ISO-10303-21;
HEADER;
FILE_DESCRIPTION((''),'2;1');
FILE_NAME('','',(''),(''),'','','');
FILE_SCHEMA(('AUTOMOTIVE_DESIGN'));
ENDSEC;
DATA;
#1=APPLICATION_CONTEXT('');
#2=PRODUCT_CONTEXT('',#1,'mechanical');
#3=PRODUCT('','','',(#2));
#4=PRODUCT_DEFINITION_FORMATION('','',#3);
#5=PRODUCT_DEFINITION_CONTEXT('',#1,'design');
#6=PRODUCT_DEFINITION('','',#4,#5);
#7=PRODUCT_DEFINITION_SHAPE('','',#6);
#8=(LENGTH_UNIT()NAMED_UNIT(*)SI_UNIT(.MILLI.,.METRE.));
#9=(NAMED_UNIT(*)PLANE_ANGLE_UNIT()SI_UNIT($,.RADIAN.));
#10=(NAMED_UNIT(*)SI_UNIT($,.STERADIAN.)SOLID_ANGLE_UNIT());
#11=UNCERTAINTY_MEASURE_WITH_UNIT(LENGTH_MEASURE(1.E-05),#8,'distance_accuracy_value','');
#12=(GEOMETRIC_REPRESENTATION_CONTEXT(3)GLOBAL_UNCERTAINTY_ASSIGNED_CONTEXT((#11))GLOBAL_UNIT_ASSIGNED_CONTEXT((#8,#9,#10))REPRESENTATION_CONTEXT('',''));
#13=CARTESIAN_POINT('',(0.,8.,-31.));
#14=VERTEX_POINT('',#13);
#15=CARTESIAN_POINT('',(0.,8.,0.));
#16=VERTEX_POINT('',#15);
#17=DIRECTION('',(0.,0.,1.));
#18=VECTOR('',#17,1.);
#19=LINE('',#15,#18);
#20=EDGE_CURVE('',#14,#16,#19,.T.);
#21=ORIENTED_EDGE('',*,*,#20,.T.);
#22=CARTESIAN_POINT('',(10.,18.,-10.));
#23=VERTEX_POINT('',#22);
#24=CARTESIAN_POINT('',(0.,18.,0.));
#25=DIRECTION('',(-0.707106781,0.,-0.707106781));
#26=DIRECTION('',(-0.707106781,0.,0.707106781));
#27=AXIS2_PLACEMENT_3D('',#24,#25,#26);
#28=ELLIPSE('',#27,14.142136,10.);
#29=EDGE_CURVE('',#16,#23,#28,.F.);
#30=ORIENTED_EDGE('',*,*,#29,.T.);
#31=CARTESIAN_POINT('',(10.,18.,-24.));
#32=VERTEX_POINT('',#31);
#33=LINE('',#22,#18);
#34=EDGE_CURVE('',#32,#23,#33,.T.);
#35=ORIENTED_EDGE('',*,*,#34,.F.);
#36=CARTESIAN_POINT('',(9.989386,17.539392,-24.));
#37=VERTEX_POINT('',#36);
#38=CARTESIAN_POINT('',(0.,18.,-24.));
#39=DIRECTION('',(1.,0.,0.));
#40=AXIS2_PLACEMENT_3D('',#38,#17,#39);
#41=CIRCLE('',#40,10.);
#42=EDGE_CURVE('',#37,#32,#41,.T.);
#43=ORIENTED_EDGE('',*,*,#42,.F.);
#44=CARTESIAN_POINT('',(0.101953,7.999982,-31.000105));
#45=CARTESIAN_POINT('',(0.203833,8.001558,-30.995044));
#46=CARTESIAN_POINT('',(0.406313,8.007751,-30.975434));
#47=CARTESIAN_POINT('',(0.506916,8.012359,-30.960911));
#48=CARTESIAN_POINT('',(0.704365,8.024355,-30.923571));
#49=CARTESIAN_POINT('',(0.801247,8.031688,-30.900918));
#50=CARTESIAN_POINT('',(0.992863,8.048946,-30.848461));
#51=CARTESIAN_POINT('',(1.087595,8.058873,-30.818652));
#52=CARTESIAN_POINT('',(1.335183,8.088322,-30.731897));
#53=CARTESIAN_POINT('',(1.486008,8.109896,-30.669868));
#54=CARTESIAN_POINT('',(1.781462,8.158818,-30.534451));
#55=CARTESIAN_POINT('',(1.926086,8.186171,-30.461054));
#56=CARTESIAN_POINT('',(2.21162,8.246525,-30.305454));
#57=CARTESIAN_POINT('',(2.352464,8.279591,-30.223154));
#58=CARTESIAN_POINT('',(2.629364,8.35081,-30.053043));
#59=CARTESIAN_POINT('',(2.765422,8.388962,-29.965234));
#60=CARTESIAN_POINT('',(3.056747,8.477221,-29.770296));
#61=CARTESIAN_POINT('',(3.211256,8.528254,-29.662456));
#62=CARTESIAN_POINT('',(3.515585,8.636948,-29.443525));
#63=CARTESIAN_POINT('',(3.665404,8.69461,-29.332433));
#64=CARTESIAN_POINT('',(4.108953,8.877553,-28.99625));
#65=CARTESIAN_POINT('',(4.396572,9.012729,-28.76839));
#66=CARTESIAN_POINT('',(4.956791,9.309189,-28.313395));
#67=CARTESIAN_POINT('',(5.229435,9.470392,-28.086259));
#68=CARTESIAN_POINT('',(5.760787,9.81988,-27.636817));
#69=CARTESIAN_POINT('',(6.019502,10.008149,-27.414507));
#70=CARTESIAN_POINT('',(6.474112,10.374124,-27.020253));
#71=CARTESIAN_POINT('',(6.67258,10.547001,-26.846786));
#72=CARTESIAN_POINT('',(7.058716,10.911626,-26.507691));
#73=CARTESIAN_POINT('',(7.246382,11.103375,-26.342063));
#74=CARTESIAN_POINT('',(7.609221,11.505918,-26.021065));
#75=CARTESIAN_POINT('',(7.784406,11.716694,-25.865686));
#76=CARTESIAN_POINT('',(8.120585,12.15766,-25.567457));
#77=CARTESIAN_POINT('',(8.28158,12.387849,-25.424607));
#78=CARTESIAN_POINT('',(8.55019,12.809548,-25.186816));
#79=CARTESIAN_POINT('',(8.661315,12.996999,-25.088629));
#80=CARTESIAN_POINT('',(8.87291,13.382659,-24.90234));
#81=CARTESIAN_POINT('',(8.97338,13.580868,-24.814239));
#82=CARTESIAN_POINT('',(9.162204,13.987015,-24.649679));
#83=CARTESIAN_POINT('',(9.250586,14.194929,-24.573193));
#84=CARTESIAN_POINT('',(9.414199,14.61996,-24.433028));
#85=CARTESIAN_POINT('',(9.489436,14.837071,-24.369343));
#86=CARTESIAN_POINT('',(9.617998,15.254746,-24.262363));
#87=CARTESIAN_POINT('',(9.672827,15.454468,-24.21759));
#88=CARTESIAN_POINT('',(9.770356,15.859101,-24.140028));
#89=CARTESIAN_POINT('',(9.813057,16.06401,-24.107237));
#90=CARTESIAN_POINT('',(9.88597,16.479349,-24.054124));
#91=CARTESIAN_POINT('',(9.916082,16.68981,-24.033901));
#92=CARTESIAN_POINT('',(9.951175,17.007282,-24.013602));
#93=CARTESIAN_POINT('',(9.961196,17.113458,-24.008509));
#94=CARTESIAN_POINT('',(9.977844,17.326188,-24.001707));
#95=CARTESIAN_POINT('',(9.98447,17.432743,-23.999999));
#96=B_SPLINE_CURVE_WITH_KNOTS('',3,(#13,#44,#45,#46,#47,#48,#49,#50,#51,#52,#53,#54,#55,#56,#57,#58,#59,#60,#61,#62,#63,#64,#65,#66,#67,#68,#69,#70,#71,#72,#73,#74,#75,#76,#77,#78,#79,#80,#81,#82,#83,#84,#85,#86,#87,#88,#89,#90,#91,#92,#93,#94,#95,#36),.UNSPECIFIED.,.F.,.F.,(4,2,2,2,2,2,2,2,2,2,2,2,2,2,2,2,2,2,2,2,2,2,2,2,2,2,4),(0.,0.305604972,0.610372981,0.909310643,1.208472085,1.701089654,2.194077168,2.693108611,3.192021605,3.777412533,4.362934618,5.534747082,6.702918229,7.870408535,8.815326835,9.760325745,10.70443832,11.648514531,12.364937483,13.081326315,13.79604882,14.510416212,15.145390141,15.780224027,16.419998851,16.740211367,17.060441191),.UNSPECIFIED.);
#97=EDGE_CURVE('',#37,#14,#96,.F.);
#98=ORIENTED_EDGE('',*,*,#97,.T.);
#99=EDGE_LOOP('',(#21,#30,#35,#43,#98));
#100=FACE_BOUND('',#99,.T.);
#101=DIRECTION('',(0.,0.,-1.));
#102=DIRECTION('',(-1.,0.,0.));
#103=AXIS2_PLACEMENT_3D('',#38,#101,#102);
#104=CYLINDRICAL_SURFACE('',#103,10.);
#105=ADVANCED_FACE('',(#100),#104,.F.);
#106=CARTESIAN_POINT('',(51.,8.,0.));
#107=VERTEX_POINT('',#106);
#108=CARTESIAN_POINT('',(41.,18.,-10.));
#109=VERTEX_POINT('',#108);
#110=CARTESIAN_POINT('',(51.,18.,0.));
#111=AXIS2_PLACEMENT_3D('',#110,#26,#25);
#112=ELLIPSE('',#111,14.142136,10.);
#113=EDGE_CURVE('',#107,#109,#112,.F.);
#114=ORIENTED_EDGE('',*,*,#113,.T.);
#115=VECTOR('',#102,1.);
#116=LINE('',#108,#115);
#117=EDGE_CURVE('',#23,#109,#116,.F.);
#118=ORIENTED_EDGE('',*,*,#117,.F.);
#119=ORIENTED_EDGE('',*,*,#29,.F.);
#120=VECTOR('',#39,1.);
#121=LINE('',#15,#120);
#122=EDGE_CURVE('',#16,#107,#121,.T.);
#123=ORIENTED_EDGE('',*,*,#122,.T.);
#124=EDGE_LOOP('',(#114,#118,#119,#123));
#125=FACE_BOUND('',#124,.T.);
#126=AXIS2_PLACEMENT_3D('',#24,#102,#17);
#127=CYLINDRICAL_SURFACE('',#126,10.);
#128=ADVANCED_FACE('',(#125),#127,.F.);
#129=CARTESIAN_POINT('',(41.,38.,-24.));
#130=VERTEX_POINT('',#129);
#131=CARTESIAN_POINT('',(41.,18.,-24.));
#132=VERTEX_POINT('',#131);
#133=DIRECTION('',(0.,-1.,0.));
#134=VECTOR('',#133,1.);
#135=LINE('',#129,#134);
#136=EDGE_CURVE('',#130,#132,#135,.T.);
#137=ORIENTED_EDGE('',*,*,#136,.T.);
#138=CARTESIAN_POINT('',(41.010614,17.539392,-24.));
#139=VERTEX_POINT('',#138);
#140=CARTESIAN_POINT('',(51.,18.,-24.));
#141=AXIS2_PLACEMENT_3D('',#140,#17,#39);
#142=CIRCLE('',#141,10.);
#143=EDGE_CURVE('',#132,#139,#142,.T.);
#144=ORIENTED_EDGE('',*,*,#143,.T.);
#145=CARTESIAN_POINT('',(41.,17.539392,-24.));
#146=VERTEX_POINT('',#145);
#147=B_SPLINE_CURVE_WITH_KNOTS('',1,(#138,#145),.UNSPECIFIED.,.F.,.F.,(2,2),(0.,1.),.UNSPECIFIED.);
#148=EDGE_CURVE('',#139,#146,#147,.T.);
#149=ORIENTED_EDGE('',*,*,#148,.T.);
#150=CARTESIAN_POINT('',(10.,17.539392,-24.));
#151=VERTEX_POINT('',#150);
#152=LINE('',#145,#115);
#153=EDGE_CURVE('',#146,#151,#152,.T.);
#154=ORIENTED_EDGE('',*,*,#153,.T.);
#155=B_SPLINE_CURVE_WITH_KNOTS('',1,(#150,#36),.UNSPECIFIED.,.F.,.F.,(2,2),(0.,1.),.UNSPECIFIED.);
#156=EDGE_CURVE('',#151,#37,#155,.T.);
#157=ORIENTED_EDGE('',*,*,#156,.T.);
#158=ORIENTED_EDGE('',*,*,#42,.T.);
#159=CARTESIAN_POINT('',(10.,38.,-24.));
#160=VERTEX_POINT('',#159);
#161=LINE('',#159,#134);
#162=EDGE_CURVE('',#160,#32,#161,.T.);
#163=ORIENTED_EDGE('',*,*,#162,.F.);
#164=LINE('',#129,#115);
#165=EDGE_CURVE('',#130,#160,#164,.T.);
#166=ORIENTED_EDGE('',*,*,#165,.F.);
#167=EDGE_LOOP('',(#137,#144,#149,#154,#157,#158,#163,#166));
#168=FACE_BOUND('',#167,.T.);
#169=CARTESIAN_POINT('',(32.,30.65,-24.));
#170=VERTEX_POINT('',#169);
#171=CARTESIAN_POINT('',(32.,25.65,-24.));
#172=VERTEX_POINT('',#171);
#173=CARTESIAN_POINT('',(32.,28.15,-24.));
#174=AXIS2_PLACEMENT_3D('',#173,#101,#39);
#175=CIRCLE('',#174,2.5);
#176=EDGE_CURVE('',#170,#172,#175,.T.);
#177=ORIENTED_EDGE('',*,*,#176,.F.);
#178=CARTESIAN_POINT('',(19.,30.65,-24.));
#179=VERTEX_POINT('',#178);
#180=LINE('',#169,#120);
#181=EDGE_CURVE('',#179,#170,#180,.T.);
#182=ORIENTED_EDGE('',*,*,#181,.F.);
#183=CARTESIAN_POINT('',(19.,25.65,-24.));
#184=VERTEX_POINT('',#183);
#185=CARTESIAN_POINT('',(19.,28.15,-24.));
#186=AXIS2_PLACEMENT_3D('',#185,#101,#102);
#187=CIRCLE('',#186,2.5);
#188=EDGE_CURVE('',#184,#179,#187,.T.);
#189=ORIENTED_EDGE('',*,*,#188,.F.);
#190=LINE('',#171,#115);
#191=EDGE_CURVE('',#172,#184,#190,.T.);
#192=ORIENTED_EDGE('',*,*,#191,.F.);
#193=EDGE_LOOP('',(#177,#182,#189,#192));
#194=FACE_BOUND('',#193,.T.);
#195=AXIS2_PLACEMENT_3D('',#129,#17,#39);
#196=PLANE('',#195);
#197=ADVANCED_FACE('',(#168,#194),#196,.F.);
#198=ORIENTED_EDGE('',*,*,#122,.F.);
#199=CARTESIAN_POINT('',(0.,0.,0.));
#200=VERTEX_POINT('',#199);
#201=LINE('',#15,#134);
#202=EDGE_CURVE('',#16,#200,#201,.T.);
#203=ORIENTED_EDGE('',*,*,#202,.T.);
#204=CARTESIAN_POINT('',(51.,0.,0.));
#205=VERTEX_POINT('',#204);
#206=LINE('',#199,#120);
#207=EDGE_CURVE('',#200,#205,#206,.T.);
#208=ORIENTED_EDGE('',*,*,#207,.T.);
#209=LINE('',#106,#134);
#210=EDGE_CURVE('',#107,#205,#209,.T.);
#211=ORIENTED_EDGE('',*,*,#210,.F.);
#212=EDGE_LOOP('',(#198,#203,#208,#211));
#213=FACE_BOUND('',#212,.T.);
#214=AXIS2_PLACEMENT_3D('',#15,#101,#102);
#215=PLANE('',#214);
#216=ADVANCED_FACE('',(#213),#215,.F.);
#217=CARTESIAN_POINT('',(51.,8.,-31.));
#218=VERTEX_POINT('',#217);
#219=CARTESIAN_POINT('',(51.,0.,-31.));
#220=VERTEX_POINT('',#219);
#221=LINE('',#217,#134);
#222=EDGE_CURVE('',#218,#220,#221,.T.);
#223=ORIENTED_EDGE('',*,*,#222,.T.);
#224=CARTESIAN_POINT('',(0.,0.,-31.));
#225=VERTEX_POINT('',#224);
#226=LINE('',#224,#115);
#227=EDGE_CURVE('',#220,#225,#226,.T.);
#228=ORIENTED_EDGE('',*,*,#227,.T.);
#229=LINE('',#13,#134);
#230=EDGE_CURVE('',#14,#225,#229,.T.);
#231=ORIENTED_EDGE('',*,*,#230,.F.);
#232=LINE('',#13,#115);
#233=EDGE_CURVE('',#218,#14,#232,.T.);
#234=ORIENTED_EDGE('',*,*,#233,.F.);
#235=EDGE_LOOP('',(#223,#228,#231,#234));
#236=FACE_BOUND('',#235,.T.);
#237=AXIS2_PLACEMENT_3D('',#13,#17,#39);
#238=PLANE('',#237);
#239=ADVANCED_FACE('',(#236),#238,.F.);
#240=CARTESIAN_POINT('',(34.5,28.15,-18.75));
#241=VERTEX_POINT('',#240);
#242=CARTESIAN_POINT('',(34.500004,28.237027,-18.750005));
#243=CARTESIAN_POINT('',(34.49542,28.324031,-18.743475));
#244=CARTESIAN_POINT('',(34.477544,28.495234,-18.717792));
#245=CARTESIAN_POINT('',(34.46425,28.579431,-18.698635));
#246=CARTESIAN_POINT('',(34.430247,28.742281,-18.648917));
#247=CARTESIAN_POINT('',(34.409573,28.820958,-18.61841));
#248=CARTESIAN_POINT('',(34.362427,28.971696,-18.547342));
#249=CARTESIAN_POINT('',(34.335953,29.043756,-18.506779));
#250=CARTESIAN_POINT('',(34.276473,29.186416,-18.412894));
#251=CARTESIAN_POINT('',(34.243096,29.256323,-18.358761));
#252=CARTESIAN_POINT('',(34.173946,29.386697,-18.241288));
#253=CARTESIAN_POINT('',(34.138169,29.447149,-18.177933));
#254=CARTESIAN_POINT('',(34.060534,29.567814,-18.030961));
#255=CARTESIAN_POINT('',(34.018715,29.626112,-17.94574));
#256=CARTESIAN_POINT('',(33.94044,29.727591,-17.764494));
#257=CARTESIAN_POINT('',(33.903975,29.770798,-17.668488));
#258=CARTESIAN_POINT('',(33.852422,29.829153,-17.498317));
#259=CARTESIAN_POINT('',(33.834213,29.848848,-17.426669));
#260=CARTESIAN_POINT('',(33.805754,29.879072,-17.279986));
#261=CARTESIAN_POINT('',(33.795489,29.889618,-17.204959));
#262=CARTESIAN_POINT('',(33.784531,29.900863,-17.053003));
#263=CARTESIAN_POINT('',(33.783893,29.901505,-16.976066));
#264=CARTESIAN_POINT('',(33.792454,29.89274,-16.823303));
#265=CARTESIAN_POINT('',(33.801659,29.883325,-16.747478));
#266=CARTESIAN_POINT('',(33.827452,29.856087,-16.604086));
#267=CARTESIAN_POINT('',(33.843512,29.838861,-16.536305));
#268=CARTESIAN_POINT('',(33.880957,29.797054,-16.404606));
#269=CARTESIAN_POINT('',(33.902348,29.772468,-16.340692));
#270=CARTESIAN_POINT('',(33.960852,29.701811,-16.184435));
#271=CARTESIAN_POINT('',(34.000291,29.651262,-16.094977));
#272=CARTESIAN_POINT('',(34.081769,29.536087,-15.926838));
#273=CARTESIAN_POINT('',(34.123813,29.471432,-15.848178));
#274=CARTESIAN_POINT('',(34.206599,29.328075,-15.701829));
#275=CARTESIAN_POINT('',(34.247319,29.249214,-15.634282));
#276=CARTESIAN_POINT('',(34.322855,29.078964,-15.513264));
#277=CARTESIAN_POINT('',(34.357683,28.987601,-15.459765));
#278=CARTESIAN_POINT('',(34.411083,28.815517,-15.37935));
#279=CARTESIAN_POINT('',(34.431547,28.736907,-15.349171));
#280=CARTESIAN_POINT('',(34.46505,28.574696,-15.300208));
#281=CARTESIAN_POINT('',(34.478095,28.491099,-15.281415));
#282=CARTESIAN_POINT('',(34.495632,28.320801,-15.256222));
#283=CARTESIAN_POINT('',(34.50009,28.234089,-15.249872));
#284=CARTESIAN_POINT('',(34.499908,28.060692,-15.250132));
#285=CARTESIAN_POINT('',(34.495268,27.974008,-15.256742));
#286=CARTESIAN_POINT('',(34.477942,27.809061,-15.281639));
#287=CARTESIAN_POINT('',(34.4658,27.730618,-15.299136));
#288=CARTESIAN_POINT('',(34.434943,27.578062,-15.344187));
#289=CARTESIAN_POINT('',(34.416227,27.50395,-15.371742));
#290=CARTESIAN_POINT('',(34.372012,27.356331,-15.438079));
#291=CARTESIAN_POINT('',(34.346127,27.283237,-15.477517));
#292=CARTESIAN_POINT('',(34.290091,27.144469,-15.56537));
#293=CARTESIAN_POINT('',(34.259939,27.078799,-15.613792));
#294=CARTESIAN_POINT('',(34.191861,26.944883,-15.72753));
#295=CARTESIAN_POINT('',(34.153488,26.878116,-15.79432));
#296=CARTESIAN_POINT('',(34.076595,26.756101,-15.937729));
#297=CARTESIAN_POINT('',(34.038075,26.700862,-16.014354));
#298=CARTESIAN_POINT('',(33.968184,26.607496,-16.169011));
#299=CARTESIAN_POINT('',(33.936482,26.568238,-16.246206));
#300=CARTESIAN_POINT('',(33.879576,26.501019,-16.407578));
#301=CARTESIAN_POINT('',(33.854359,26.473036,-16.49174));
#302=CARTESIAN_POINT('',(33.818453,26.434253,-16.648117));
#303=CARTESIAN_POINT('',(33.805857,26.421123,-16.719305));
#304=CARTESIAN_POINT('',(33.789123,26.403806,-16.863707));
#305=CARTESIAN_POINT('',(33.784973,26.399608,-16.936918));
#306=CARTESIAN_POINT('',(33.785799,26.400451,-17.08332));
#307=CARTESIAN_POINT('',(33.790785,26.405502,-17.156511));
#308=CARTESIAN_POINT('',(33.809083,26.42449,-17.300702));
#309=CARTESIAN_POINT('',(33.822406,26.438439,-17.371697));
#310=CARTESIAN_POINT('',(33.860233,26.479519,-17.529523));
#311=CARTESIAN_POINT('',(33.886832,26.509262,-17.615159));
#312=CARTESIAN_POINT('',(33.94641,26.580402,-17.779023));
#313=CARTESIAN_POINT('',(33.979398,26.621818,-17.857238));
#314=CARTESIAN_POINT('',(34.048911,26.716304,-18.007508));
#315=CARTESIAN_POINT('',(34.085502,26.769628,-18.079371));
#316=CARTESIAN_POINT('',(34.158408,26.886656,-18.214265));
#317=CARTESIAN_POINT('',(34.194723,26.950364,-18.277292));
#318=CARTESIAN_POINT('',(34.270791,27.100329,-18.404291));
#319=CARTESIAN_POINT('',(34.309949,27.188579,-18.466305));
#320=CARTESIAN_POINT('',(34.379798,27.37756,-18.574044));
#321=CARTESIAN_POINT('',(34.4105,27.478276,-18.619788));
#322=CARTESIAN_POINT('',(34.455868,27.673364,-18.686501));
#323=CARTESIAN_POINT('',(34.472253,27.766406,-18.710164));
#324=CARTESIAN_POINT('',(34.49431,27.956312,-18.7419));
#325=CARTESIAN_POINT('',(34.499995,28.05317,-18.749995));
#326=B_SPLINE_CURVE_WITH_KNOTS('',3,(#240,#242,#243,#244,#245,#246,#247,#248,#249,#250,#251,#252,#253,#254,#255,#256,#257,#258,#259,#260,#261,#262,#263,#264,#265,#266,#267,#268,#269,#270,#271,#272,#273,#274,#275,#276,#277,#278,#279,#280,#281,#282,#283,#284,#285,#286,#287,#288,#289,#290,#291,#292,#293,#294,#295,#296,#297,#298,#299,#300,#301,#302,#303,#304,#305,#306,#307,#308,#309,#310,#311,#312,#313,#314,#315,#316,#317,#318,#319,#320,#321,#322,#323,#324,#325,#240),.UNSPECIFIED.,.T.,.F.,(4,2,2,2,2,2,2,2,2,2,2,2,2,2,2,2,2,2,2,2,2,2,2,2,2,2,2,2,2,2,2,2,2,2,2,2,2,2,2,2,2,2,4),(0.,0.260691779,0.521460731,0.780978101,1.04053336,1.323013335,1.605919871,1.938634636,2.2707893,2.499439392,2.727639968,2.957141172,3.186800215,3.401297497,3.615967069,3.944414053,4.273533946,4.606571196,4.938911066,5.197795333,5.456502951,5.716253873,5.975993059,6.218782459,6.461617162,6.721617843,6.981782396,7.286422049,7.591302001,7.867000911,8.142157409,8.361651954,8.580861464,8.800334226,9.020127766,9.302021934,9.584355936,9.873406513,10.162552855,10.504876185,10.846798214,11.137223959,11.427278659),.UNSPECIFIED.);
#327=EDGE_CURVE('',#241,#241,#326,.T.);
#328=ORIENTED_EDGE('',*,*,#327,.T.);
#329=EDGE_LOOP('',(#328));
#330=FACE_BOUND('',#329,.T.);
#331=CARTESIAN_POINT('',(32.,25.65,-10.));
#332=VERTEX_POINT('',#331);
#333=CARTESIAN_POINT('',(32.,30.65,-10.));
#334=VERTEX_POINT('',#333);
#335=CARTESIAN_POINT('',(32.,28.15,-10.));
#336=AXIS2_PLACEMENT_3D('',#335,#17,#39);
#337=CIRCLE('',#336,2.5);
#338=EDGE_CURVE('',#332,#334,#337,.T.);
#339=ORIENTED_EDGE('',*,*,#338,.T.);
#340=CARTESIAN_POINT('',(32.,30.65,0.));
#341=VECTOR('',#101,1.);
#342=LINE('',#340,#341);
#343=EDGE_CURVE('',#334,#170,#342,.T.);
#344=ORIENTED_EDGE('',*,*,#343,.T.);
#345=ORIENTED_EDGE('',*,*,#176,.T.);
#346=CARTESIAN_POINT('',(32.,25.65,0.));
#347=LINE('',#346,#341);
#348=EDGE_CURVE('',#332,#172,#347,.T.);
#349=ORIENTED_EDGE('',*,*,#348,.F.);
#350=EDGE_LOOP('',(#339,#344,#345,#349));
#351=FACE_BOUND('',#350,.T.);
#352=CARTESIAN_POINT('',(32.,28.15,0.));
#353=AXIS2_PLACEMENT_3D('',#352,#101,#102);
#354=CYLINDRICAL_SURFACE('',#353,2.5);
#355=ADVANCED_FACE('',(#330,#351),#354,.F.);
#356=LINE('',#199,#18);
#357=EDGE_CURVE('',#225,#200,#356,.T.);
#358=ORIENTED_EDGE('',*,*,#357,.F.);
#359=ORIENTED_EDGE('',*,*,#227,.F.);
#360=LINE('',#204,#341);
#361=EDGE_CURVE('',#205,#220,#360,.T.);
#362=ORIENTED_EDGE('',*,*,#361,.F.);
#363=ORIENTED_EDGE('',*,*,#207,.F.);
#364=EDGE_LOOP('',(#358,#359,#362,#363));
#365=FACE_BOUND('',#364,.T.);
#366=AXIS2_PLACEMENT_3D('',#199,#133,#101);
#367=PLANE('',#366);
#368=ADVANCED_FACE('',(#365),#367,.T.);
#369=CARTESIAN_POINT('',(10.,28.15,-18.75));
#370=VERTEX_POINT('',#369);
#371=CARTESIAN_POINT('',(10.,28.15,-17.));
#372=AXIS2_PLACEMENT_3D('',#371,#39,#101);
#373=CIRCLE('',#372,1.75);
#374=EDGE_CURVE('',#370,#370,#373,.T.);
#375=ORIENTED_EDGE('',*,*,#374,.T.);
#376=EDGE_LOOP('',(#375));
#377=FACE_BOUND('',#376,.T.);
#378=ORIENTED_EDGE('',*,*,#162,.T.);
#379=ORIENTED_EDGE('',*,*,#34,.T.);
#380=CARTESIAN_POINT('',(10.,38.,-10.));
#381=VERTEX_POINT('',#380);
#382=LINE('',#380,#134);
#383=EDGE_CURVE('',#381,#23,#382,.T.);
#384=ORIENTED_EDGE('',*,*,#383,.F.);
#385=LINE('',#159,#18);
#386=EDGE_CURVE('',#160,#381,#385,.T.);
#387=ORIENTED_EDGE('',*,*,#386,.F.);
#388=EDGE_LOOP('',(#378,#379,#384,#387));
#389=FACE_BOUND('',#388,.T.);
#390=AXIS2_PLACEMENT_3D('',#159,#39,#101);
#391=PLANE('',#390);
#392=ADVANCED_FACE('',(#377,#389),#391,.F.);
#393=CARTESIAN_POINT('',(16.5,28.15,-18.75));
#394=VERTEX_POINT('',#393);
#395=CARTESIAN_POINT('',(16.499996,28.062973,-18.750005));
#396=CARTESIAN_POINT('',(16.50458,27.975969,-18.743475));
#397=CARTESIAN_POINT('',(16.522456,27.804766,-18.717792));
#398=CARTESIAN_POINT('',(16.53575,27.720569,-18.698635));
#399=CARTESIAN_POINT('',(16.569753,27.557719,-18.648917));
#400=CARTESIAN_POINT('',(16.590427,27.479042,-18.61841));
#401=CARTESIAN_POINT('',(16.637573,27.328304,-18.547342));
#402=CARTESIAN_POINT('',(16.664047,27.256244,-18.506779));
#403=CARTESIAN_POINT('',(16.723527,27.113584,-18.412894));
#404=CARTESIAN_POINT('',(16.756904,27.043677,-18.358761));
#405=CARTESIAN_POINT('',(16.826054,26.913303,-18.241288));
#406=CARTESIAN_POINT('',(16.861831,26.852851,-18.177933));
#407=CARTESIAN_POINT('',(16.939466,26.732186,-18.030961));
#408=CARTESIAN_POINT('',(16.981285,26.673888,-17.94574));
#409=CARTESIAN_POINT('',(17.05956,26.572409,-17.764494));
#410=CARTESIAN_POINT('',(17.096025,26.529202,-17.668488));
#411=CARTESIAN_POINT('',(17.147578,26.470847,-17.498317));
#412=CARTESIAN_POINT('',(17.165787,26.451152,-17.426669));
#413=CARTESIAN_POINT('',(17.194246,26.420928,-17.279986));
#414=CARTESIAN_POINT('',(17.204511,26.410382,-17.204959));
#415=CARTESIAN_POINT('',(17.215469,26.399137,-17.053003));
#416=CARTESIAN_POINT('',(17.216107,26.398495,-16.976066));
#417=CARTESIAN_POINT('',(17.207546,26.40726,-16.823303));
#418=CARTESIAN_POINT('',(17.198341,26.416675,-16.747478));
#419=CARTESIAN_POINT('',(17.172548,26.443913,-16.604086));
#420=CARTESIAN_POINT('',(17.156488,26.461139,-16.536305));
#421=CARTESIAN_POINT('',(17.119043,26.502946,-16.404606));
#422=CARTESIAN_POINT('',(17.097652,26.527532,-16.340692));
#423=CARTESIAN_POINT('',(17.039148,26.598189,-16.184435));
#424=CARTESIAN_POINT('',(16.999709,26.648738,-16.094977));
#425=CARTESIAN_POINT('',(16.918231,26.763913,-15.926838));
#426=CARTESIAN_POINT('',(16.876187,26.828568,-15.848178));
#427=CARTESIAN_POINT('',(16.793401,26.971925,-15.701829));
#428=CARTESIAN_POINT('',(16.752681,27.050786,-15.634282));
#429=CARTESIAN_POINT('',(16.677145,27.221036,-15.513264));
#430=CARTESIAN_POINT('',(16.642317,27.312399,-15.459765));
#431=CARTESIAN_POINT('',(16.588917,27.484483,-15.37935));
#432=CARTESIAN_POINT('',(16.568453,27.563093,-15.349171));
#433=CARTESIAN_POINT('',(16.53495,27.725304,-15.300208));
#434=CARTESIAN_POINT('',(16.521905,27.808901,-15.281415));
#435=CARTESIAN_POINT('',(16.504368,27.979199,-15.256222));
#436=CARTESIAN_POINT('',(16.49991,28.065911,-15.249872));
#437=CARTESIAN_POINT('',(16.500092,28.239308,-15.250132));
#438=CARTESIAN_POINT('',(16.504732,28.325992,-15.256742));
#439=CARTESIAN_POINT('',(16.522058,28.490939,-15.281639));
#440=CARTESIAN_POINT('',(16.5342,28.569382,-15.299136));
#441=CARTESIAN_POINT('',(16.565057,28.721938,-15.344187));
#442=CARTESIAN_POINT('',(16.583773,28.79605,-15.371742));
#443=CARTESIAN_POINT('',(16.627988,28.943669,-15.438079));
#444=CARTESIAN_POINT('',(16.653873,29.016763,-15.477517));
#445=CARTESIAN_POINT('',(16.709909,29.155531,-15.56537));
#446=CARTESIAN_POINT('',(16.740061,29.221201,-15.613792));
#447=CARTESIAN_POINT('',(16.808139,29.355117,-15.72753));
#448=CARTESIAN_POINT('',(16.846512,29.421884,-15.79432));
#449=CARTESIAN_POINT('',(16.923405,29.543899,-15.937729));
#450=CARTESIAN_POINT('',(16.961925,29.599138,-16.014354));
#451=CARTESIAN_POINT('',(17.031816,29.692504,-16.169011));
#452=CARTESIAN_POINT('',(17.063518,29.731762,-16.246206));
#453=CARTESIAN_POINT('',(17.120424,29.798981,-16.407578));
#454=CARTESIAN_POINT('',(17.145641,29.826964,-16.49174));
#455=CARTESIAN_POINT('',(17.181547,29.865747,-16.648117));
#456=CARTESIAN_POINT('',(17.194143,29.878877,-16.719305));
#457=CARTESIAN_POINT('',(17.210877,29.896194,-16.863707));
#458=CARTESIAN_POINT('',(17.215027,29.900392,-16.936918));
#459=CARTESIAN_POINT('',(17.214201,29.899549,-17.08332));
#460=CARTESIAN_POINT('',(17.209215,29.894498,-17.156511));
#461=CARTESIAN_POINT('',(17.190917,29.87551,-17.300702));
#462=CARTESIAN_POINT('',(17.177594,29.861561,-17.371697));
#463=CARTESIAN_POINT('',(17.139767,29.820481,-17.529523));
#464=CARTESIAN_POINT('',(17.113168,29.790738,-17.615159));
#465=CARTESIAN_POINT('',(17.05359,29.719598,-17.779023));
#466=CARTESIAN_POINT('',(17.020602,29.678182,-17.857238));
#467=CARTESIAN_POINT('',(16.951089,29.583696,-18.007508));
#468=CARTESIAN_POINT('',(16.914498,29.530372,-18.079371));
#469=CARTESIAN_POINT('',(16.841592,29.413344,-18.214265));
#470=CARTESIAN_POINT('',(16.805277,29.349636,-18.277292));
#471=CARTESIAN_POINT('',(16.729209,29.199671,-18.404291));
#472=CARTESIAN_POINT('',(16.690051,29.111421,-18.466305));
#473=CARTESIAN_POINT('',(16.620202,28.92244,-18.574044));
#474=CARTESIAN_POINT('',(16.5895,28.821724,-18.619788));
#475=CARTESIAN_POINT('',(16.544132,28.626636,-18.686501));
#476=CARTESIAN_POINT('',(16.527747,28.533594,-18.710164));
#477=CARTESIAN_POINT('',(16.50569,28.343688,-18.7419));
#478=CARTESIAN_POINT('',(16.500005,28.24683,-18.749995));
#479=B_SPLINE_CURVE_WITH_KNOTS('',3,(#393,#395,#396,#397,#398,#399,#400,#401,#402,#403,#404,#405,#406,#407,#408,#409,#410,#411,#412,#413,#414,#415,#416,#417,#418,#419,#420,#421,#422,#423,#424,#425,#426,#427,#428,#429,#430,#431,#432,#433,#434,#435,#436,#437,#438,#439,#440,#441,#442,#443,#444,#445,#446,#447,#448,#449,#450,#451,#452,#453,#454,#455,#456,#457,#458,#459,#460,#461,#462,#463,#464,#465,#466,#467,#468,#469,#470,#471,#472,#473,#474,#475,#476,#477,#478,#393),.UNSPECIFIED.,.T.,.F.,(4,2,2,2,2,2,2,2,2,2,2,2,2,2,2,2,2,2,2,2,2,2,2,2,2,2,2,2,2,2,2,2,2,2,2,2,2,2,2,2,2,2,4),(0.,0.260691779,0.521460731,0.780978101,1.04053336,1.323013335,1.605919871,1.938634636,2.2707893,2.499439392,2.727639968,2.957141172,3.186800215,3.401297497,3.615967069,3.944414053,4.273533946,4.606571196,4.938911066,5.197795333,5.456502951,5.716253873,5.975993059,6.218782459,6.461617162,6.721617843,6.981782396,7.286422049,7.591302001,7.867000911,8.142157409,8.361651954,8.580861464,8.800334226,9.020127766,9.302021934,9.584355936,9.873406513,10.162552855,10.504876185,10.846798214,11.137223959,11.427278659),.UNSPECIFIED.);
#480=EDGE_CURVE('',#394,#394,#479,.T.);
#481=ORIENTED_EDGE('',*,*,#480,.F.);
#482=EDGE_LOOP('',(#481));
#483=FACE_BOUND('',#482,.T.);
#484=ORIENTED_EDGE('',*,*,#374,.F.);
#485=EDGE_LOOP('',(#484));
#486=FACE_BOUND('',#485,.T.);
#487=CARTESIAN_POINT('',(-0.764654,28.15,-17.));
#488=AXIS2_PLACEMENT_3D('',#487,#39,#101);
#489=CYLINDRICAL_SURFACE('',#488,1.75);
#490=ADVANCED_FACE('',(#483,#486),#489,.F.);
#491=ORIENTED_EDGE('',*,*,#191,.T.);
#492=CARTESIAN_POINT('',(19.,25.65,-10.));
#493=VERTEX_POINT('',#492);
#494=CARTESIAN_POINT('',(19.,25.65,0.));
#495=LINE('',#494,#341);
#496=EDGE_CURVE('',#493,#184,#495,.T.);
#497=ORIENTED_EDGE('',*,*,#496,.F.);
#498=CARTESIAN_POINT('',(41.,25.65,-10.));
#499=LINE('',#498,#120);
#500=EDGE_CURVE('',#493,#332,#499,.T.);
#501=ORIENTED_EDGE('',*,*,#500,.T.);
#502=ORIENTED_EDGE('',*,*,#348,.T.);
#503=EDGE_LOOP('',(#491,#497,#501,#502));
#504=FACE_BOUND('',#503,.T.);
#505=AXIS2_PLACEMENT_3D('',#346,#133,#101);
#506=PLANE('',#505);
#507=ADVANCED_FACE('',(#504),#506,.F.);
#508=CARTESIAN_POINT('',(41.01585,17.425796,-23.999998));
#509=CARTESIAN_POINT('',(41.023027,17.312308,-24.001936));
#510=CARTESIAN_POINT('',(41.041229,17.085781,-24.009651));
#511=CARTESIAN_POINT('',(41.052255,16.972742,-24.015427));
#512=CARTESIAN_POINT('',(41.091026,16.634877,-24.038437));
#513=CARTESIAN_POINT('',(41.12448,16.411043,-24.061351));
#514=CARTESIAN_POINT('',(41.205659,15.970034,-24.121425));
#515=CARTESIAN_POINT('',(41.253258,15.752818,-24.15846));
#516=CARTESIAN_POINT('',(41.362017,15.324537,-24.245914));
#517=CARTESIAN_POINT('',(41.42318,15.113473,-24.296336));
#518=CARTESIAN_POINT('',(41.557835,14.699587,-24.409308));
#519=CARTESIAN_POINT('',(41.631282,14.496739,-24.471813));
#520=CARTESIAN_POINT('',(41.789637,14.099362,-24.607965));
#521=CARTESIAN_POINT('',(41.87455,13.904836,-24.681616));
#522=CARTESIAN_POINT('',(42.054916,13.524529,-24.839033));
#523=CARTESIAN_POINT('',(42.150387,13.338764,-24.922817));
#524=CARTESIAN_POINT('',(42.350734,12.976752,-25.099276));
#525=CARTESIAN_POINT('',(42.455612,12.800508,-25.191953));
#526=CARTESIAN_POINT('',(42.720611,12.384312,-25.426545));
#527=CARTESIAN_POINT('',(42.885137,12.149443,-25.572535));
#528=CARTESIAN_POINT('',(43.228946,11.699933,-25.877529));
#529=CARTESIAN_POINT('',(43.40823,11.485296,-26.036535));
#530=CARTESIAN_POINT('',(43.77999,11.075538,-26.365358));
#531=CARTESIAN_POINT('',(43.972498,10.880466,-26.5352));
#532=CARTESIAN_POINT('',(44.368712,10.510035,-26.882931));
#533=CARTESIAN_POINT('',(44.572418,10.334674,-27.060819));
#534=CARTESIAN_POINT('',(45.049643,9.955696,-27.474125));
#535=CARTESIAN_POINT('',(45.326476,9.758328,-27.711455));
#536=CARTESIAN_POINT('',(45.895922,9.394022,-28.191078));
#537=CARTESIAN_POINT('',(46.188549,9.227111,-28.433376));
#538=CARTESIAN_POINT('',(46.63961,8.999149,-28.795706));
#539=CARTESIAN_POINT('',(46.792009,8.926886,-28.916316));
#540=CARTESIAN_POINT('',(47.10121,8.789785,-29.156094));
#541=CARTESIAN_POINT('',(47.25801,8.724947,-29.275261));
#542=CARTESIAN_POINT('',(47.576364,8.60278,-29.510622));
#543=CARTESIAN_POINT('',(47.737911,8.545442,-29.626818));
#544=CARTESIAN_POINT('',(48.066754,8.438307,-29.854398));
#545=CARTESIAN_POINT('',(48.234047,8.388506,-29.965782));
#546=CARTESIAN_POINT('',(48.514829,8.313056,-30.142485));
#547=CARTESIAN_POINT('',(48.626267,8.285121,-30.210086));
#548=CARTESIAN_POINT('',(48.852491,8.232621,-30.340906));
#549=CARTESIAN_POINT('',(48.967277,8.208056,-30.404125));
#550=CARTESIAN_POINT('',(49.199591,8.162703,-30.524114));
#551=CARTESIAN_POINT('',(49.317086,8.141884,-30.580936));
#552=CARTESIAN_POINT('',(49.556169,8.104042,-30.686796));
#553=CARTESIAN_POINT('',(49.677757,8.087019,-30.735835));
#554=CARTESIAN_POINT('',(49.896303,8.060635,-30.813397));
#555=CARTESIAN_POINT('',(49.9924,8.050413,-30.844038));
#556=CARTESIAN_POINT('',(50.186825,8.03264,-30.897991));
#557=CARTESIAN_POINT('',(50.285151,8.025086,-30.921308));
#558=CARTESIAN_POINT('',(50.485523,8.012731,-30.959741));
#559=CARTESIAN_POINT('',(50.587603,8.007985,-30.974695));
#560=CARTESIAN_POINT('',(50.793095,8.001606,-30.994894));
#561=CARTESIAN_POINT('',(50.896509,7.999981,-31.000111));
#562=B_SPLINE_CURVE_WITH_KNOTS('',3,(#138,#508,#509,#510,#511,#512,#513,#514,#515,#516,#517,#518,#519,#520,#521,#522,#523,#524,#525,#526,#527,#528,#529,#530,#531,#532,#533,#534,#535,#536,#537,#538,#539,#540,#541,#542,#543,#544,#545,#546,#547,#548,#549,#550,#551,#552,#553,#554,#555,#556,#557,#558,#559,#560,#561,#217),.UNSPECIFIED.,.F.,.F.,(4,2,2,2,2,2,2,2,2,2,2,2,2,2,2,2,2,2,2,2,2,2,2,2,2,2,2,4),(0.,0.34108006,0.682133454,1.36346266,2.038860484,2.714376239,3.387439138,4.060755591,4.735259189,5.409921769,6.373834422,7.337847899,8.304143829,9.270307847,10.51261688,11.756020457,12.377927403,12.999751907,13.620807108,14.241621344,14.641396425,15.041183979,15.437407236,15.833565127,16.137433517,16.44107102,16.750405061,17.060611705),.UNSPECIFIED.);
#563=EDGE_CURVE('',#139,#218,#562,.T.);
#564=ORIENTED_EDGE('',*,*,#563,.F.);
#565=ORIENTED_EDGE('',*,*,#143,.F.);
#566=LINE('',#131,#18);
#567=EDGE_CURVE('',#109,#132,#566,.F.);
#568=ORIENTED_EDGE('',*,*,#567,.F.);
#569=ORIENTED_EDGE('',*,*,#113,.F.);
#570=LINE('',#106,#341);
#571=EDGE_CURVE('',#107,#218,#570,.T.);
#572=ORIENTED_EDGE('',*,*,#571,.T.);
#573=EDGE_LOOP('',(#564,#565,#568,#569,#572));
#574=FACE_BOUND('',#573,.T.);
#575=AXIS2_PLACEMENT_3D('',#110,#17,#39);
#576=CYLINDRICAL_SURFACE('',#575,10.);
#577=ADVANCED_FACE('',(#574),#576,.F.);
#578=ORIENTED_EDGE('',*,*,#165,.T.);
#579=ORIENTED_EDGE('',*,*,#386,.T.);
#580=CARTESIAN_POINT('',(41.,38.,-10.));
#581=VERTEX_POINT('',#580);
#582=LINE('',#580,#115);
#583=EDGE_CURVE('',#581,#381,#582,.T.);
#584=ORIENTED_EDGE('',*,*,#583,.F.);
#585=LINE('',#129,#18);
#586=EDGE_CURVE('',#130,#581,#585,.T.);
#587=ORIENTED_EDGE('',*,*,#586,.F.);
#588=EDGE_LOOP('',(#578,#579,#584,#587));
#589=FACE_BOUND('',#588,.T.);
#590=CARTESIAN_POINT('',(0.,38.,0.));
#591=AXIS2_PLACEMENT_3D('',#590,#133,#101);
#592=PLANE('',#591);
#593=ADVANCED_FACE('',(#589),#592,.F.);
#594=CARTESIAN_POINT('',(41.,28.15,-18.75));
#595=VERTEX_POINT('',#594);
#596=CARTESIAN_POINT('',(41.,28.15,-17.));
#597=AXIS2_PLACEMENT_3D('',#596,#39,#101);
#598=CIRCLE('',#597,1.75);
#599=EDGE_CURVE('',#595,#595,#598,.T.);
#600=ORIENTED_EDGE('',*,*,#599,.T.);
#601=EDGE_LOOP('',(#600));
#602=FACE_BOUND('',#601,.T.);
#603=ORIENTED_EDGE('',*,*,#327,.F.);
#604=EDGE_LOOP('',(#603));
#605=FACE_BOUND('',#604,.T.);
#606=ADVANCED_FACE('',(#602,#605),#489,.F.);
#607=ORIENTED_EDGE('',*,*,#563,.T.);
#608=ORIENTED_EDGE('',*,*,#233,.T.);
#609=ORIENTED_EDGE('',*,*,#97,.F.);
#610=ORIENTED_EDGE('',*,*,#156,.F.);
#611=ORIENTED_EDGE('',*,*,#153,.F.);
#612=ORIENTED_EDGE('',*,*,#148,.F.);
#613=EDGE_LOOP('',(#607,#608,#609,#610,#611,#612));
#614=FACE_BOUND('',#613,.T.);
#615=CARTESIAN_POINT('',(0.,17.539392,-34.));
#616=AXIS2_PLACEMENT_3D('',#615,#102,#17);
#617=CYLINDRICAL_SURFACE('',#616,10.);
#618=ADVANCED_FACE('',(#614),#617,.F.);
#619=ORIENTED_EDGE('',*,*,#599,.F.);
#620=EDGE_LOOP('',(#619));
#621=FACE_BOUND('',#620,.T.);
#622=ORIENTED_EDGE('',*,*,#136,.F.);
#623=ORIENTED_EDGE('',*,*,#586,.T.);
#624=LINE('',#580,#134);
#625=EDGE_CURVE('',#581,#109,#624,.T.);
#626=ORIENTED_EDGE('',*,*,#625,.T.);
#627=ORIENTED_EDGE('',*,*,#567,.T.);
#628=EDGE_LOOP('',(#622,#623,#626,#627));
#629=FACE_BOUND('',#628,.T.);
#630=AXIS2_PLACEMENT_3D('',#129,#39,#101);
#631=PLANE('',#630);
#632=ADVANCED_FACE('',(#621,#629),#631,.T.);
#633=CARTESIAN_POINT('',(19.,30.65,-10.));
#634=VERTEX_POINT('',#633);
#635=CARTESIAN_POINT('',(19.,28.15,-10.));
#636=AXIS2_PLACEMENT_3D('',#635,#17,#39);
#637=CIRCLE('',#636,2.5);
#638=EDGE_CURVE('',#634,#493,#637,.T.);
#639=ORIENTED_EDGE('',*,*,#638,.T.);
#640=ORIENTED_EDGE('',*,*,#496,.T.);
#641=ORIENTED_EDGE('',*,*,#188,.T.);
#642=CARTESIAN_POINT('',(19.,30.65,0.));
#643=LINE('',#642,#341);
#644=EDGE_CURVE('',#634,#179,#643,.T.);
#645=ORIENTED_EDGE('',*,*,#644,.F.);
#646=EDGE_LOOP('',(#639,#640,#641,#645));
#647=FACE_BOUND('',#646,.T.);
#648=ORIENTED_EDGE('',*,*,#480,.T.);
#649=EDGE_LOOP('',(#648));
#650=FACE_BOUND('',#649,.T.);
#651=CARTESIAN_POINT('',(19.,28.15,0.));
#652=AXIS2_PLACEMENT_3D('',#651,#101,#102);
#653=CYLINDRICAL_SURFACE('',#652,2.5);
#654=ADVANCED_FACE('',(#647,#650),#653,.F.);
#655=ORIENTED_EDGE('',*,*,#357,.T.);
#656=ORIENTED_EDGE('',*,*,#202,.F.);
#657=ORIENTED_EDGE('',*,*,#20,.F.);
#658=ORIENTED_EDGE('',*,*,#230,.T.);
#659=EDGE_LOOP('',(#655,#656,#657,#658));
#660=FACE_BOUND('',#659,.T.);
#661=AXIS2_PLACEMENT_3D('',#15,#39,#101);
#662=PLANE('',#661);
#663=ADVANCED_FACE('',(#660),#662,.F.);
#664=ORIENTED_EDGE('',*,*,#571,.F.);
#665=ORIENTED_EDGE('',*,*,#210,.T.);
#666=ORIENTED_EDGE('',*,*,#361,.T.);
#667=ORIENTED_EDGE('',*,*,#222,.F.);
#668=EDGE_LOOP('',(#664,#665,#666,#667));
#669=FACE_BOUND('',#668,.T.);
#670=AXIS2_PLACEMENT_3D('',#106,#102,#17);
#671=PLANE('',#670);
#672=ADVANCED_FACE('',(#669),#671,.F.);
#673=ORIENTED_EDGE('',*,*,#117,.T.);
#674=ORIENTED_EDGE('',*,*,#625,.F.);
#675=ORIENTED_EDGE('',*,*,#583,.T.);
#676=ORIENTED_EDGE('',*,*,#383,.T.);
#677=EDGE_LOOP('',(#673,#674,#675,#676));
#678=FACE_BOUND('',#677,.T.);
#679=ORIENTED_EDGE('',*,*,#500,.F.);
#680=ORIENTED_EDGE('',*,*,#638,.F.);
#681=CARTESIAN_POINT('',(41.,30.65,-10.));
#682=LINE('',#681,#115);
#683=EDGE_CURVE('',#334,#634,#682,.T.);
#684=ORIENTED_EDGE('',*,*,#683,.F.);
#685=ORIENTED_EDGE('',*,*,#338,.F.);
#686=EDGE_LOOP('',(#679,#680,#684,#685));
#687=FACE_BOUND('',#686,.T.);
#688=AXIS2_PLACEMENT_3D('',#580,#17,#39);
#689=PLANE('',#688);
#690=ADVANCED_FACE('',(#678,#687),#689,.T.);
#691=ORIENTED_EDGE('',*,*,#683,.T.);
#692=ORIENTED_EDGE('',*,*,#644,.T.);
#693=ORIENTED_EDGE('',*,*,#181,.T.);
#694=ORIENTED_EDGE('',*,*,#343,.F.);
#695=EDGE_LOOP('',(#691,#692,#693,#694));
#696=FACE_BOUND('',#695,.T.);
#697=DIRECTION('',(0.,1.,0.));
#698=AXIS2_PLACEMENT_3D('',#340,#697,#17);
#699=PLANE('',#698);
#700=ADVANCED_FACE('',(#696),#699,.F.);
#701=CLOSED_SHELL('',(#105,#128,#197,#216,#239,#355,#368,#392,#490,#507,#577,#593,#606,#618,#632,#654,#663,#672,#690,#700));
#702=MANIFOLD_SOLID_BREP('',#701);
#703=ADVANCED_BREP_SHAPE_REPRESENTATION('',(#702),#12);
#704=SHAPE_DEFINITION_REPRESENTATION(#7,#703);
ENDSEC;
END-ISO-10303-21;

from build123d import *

# Parameters (mm, degrees)
SKETCH1_W                               = 51
SKETCH1_H                               = 31
BOSS_EXTRUDE1_DEPTH                     = 8
SKETCH5_W                               = 31
SKETCH5_H                               = 14
BOSS_EXTRUDE3_DEPTH                     = 30
CUT_EXTRUDE3_DEPTH                      = 68.977937597
FILLET1_R                               = 10
SKETCH8_R                               = 1.75
F_3_5MM_SCREW_HOLE_FOR_TENSIONING_DEPTH = 64.921827371


with BuildPart() as part:
    # Sketch1 → Boss-Extrude1 (new body)
    with BuildSketch(Plane(origin=(0, 0, 0), x_dir=(1, 0, 0), z_dir=(0, 1, 0))):
        with Locations((25.5, 15.5)):
            Rectangle(SKETCH1_W, SKETCH1_H)
    extrude(amount=BOSS_EXTRUDE1_DEPTH)

    # Sketch5 → Boss-Extrude3 (add)
    with BuildSketch(Plane(origin=(0, 8, 0), x_dir=(1, 0, 0), z_dir=(0, 1, 0))):
        with Locations((25.5, 17)):
            Rectangle(SKETCH5_W, SKETCH5_H)
    extrude(amount=BOSS_EXTRUDE3_DEPTH)

    # Sketch6 → Cut-Extrude3 (cut, through all)
    with BuildSketch(Plane(origin=(0, 0, -24), x_dir=(-1, 0, 0), z_dir=(0, 0, -1))):
        with BuildLine():
            Line((-32.000000097, 30.65), (-18.999999903, 30.65))
            ThreePointArc((-18.999999903, 30.65), (-16.499999903, 28.15), (-18.999999903, 25.65))
            Line((-18.999999903, 25.65), (-32.000000097, 25.65))
            ThreePointArc((-32.000000097, 25.65), (-34.500000097, 28.15), (-32.000000097, 30.65))
        make_face()
    extrude(amount=-CUT_EXTRUDE3_DEPTH, mode=Mode.SUBTRACT)

    # Fillet1
    # the kernel refuses this fillet: 10 mm, written as the material it adds along each edge
    with BuildSketch(Plane(origin=(41, 8, -24), x_dir=(0, 0, -1), z_dir=(-1, 0, 0))) as fillet1_piece_1:
        with BuildLine():
            CenterArc((10, -9.539392014), FILLET1_R, 107.457603124, 72.542396876)
            Line((0, -9.539392014), (-0.2, -9.539392014))
            Line((-0.2, -9.539392014), (-0.2, 0))
            Line((-0.2, 0), (0, 0.2))
            ThreePointArc((0, 0.2), (3.5, 0.2), (6.94, 0.19078784))
            Line((6.94, 0.19078784), (7, 0))
        make_face()
    extrude(amount=31)
    with BuildSketch(Plane(origin=(10, 8, -24), x_dir=(-1, 0, 0), z_dir=(0, 0, 1)), Plane(origin=(41, 8, -10), x_dir=(1, 0, 0), z_dir=(0, 0, -1))) as fillet1_piece_2:
        with BuildLine():
            CenterArc((FILLET1_R, -FILLET1_R), FILLET1_R, 90, 90)
            Line((0, -FILLET1_R), (-FILLET1_R * 0.02, -FILLET1_R))
            Line((-FILLET1_R * 0.02, -FILLET1_R), (-FILLET1_R * 0.02, FILLET1_R * 0.02))
            Line((-FILLET1_R * 0.02, FILLET1_R * 0.02), (FILLET1_R, FILLET1_R * 0.02))
            Line((FILLET1_R, FILLET1_R * 0.02), (FILLET1_R, 0))
        make_face()
    extrude(amount=14)
    with BuildSketch(Plane(origin=(10, 8, -10), x_dir=(0, 0, 1), z_dir=(1, 0, 0))) as fillet1_piece_3:
        with BuildLine():
            CenterArc((FILLET1_R, -FILLET1_R), FILLET1_R, 90, 90)
            Line((0, -FILLET1_R), (-FILLET1_R * 0.02, -FILLET1_R))
            Line((-FILLET1_R * 0.02, -FILLET1_R), (-FILLET1_R * 0.02, FILLET1_R * 0.02))
            Line((-FILLET1_R * 0.02, FILLET1_R * 0.02), (FILLET1_R, FILLET1_R * 0.02))
            Line((FILLET1_R, FILLET1_R * 0.02), (FILLET1_R, 0))
        make_face()
    extrude(amount=31)
    with BuildSketch(Plane(origin=(64.848480035, 8, -24), x_dir=(0, 0, -1), z_dir=(-1, 0, 0))) as fillet1_piece_4a_section:
        with BuildLine():
            CenterArc((10, -9.539392014), FILLET1_R, 107.457603124, 72.542396876)
            Line((0, -9.539392014), (-0.2, -9.539392014))
            Line((-0.2, -9.539392014), (-0.2, 0))
            Line((-0.2, 0), (0, 0.2))
            ThreePointArc((0, 0.2), (3.5, 0.2), (6.94, 0.19078784))
            Line((6.94, 0.19078784), (7, 0))
        make_face()
    fillet1_piece_4a = extrude(amount=54.848480035, mode=Mode.PRIVATE)
    fillet1_piece_4a = split(fillet1_piece_4a, bisect_by=Plane(origin=(51, 10.271225878, -25.787817996), z_dir=(-1, 0, 0)), keep=Keep.TOP, mode=Mode.PRIVATE)
    fillet1_piece_4a = split(fillet1_piece_4a, bisect_by=Plane(origin=(41, 10.271225878, -25.787817996), z_dir=(1, 0, 0)), keep=Keep.TOP, mode=Mode.PRIVATE)
    with BuildSketch(Plane(origin=(41, 8, -10), x_dir=(1, 0, 0), z_dir=(0, 0, -1))) as fillet1_piece_4b_section:
        with BuildLine():
            CenterArc((FILLET1_R, -FILLET1_R), FILLET1_R, 90, 90)
            Line((0, -FILLET1_R), (-FILLET1_R * 0.02, -FILLET1_R))
            Line((-FILLET1_R * 0.02, -FILLET1_R), (-FILLET1_R * 0.02, FILLET1_R * 0.02))
            Line((-FILLET1_R * 0.02, FILLET1_R * 0.02), (FILLET1_R, FILLET1_R * 0.02))
            Line((FILLET1_R, FILLET1_R * 0.02), (FILLET1_R, 0))
        make_face()
    fillet1_piece_4b = extrude(amount=39, mode=Mode.PRIVATE)
    fillet1_piece_4b = split(fillet1_piece_4b, bisect_by=Plane(origin=(43.263951143, 10.263951143, -31), z_dir=(0, 0, 1)), keep=Keep.TOP, mode=Mode.PRIVATE)
    fillet1_piece_4b = split(fillet1_piece_4b, bisect_by=Plane(origin=(43.263951143, 10.263951143, -24), z_dir=(0, 0, -1)), keep=Keep.TOP, mode=Mode.PRIVATE)
    fillet1_piece_4 = fillet1_piece_4a & fillet1_piece_4b
    add(fillet1_piece_4)
    with BuildSketch(Plane(origin=(41, 8, -24), x_dir=(0, 0, -1), z_dir=(-1, 0, 0))) as fillet1_piece_5a_section:
        with BuildLine():
            CenterArc((10, -9.539392014), FILLET1_R, 107.457603124, 72.542396876)
            Line((0, -9.539392014), (-0.2, -9.539392014))
            Line((-0.2, -9.539392014), (-0.2, 0))
            Line((-0.2, 0), (0, 0.2))
            ThreePointArc((0, 0.2), (3.5, 0.2), (6.94, 0.19078784))
            Line((6.94, 0.19078784), (7, 0))
        make_face()
    fillet1_piece_5a = extrude(amount=54.848480035, mode=Mode.PRIVATE)
    fillet1_piece_5a = split(fillet1_piece_5a, bisect_by=Plane(origin=(0, 10.271225878, -25.787817996), z_dir=(1, 0, 0)), keep=Keep.TOP, mode=Mode.PRIVATE)
    fillet1_piece_5a = split(fillet1_piece_5a, bisect_by=Plane(origin=(10, 10.271225878, -25.787817996), z_dir=(-1, 0, 0)), keep=Keep.TOP, mode=Mode.PRIVATE)
    with BuildSketch(Plane(origin=(10, 8, -49), x_dir=(-1, 0, 0), z_dir=(0, 0, 1))) as fillet1_piece_5b_section:
        with BuildLine():
            CenterArc((FILLET1_R, -FILLET1_R), FILLET1_R, 90, 90)
            Line((0, -FILLET1_R), (-FILLET1_R * 0.02, -FILLET1_R))
            Line((-FILLET1_R * 0.02, -FILLET1_R), (-FILLET1_R * 0.02, FILLET1_R * 0.02))
            Line((-FILLET1_R * 0.02, FILLET1_R * 0.02), (FILLET1_R, FILLET1_R * 0.02))
            Line((FILLET1_R, FILLET1_R * 0.02), (FILLET1_R, 0))
        make_face()
    fillet1_piece_5b = extrude(amount=39, mode=Mode.PRIVATE)
    fillet1_piece_5b = split(fillet1_piece_5b, bisect_by=Plane(origin=(7.736048857, 10.263951143, -31), z_dir=(0, 0, 1)), keep=Keep.TOP, mode=Mode.PRIVATE)
    fillet1_piece_5b = split(fillet1_piece_5b, bisect_by=Plane(origin=(7.736048857, 10.263951143, -24), z_dir=(0, 0, -1)), keep=Keep.TOP, mode=Mode.PRIVATE)
    fillet1_piece_5 = fillet1_piece_5a & fillet1_piece_5b
    add(fillet1_piece_5)
    with BuildSketch(Plane(origin=(10, 8, -24), x_dir=(-1, 0, 0), z_dir=(0, 0, 1))) as fillet1_piece_6a_section:
        with BuildLine():
            CenterArc((FILLET1_R, -FILLET1_R), FILLET1_R, 90, 90)
            Line((0, -FILLET1_R), (-FILLET1_R * 0.02, -FILLET1_R))
            Line((-FILLET1_R * 0.02, -FILLET1_R), (-FILLET1_R * 0.02, FILLET1_R * 0.02))
            Line((-FILLET1_R * 0.02, FILLET1_R * 0.02), (FILLET1_R, FILLET1_R * 0.02))
            Line((FILLET1_R, FILLET1_R * 0.02), (FILLET1_R, 0))
        make_face()
    fillet1_piece_6a = extrude(amount=39, mode=Mode.PRIVATE)
    fillet1_piece_6a = split(fillet1_piece_6a, bisect_by=Plane(origin=(7.736048857, 10.263951143, 0), z_dir=(0, 0, -1)), keep=Keep.TOP, mode=Mode.PRIVATE)
    fillet1_piece_6a = split(fillet1_piece_6a, bisect_by=Plane(origin=(7.736048857, 10.263951143, -10), z_dir=(0, 0, 1)), keep=Keep.TOP, mode=Mode.PRIVATE)
    with BuildSketch(Plane(origin=(-15, 8, -10), x_dir=(0, 0, 1), z_dir=(1, 0, 0))) as fillet1_piece_6b_section:
        with BuildLine():
            CenterArc((FILLET1_R, -FILLET1_R), FILLET1_R, 90, 90)
            Line((0, -FILLET1_R), (-FILLET1_R * 0.02, -FILLET1_R))
            Line((-FILLET1_R * 0.02, -FILLET1_R), (-FILLET1_R * 0.02, FILLET1_R * 0.02))
            Line((-FILLET1_R * 0.02, FILLET1_R * 0.02), (FILLET1_R, FILLET1_R * 0.02))
            Line((FILLET1_R, FILLET1_R * 0.02), (FILLET1_R, 0))
        make_face()
    fillet1_piece_6b = extrude(amount=56, mode=Mode.PRIVATE)
    fillet1_piece_6b = split(fillet1_piece_6b, bisect_by=Plane(origin=(0, 10.263951143, -7.736048857), z_dir=(1, 0, 0)), keep=Keep.TOP, mode=Mode.PRIVATE)
    fillet1_piece_6b = split(fillet1_piece_6b, bisect_by=Plane(origin=(10, 10.263951143, -7.736048857), z_dir=(-1, 0, 0)), keep=Keep.TOP, mode=Mode.PRIVATE)
    fillet1_piece_6 = fillet1_piece_6a & fillet1_piece_6b
    add(fillet1_piece_6)
    with BuildSketch(Plane(origin=(10, 8, -10), x_dir=(0, 0, 1), z_dir=(1, 0, 0))) as fillet1_piece_7a_section:
        with BuildLine():
            CenterArc((FILLET1_R, -FILLET1_R), FILLET1_R, 90, 90)
            Line((0, -FILLET1_R), (-FILLET1_R * 0.02, -FILLET1_R))
            Line((-FILLET1_R * 0.02, -FILLET1_R), (-FILLET1_R * 0.02, FILLET1_R * 0.02))
            Line((-FILLET1_R * 0.02, FILLET1_R * 0.02), (FILLET1_R, FILLET1_R * 0.02))
            Line((FILLET1_R, FILLET1_R * 0.02), (FILLET1_R, 0))
        make_face()
    fillet1_piece_7a = extrude(amount=56, mode=Mode.PRIVATE)
    fillet1_piece_7a = split(fillet1_piece_7a, bisect_by=Plane(origin=(51, 10.263951143, -7.736048857), z_dir=(-1, 0, 0)), keep=Keep.TOP, mode=Mode.PRIVATE)
    fillet1_piece_7a = split(fillet1_piece_7a, bisect_by=Plane(origin=(41, 10.263951143, -7.736048857), z_dir=(1, 0, 0)), keep=Keep.TOP, mode=Mode.PRIVATE)
    with BuildSketch(Plane(origin=(41, 8, 15), x_dir=(1, 0, 0), z_dir=(0, 0, -1))) as fillet1_piece_7b_section:
        with BuildLine():
            CenterArc((FILLET1_R, -FILLET1_R), FILLET1_R, 90, 90)
            Line((0, -FILLET1_R), (-FILLET1_R * 0.02, -FILLET1_R))
            Line((-FILLET1_R * 0.02, -FILLET1_R), (-FILLET1_R * 0.02, FILLET1_R * 0.02))
            Line((-FILLET1_R * 0.02, FILLET1_R * 0.02), (FILLET1_R, FILLET1_R * 0.02))
            Line((FILLET1_R, FILLET1_R * 0.02), (FILLET1_R, 0))
        make_face()
    fillet1_piece_7b = extrude(amount=39, mode=Mode.PRIVATE)
    fillet1_piece_7b = split(fillet1_piece_7b, bisect_by=Plane(origin=(43.263951143, 10.263951143, 0), z_dir=(0, 0, -1)), keep=Keep.TOP, mode=Mode.PRIVATE)
    fillet1_piece_7b = split(fillet1_piece_7b, bisect_by=Plane(origin=(43.263951143, 10.263951143, -10), z_dir=(0, 0, 1)), keep=Keep.TOP, mode=Mode.PRIVATE)
    fillet1_piece_7 = fillet1_piece_7a & fillet1_piece_7b
    add(fillet1_piece_7)

    # Sketch8 → 3.5mm screw hole for tensioning (cut, through all)
    with BuildSketch(Plane(origin=(41, 0, 0), x_dir=(0, 0, -1), z_dir=(1, 0, 0))):
        with Locations((17, 28.15)):
            Circle(SKETCH8_R)
    extrude(amount=-F_3_5MM_SCREW_HOLE_FOR_TENSIONING_DEPTH, mode=Mode.SUBTRACT)


solid = part.part
